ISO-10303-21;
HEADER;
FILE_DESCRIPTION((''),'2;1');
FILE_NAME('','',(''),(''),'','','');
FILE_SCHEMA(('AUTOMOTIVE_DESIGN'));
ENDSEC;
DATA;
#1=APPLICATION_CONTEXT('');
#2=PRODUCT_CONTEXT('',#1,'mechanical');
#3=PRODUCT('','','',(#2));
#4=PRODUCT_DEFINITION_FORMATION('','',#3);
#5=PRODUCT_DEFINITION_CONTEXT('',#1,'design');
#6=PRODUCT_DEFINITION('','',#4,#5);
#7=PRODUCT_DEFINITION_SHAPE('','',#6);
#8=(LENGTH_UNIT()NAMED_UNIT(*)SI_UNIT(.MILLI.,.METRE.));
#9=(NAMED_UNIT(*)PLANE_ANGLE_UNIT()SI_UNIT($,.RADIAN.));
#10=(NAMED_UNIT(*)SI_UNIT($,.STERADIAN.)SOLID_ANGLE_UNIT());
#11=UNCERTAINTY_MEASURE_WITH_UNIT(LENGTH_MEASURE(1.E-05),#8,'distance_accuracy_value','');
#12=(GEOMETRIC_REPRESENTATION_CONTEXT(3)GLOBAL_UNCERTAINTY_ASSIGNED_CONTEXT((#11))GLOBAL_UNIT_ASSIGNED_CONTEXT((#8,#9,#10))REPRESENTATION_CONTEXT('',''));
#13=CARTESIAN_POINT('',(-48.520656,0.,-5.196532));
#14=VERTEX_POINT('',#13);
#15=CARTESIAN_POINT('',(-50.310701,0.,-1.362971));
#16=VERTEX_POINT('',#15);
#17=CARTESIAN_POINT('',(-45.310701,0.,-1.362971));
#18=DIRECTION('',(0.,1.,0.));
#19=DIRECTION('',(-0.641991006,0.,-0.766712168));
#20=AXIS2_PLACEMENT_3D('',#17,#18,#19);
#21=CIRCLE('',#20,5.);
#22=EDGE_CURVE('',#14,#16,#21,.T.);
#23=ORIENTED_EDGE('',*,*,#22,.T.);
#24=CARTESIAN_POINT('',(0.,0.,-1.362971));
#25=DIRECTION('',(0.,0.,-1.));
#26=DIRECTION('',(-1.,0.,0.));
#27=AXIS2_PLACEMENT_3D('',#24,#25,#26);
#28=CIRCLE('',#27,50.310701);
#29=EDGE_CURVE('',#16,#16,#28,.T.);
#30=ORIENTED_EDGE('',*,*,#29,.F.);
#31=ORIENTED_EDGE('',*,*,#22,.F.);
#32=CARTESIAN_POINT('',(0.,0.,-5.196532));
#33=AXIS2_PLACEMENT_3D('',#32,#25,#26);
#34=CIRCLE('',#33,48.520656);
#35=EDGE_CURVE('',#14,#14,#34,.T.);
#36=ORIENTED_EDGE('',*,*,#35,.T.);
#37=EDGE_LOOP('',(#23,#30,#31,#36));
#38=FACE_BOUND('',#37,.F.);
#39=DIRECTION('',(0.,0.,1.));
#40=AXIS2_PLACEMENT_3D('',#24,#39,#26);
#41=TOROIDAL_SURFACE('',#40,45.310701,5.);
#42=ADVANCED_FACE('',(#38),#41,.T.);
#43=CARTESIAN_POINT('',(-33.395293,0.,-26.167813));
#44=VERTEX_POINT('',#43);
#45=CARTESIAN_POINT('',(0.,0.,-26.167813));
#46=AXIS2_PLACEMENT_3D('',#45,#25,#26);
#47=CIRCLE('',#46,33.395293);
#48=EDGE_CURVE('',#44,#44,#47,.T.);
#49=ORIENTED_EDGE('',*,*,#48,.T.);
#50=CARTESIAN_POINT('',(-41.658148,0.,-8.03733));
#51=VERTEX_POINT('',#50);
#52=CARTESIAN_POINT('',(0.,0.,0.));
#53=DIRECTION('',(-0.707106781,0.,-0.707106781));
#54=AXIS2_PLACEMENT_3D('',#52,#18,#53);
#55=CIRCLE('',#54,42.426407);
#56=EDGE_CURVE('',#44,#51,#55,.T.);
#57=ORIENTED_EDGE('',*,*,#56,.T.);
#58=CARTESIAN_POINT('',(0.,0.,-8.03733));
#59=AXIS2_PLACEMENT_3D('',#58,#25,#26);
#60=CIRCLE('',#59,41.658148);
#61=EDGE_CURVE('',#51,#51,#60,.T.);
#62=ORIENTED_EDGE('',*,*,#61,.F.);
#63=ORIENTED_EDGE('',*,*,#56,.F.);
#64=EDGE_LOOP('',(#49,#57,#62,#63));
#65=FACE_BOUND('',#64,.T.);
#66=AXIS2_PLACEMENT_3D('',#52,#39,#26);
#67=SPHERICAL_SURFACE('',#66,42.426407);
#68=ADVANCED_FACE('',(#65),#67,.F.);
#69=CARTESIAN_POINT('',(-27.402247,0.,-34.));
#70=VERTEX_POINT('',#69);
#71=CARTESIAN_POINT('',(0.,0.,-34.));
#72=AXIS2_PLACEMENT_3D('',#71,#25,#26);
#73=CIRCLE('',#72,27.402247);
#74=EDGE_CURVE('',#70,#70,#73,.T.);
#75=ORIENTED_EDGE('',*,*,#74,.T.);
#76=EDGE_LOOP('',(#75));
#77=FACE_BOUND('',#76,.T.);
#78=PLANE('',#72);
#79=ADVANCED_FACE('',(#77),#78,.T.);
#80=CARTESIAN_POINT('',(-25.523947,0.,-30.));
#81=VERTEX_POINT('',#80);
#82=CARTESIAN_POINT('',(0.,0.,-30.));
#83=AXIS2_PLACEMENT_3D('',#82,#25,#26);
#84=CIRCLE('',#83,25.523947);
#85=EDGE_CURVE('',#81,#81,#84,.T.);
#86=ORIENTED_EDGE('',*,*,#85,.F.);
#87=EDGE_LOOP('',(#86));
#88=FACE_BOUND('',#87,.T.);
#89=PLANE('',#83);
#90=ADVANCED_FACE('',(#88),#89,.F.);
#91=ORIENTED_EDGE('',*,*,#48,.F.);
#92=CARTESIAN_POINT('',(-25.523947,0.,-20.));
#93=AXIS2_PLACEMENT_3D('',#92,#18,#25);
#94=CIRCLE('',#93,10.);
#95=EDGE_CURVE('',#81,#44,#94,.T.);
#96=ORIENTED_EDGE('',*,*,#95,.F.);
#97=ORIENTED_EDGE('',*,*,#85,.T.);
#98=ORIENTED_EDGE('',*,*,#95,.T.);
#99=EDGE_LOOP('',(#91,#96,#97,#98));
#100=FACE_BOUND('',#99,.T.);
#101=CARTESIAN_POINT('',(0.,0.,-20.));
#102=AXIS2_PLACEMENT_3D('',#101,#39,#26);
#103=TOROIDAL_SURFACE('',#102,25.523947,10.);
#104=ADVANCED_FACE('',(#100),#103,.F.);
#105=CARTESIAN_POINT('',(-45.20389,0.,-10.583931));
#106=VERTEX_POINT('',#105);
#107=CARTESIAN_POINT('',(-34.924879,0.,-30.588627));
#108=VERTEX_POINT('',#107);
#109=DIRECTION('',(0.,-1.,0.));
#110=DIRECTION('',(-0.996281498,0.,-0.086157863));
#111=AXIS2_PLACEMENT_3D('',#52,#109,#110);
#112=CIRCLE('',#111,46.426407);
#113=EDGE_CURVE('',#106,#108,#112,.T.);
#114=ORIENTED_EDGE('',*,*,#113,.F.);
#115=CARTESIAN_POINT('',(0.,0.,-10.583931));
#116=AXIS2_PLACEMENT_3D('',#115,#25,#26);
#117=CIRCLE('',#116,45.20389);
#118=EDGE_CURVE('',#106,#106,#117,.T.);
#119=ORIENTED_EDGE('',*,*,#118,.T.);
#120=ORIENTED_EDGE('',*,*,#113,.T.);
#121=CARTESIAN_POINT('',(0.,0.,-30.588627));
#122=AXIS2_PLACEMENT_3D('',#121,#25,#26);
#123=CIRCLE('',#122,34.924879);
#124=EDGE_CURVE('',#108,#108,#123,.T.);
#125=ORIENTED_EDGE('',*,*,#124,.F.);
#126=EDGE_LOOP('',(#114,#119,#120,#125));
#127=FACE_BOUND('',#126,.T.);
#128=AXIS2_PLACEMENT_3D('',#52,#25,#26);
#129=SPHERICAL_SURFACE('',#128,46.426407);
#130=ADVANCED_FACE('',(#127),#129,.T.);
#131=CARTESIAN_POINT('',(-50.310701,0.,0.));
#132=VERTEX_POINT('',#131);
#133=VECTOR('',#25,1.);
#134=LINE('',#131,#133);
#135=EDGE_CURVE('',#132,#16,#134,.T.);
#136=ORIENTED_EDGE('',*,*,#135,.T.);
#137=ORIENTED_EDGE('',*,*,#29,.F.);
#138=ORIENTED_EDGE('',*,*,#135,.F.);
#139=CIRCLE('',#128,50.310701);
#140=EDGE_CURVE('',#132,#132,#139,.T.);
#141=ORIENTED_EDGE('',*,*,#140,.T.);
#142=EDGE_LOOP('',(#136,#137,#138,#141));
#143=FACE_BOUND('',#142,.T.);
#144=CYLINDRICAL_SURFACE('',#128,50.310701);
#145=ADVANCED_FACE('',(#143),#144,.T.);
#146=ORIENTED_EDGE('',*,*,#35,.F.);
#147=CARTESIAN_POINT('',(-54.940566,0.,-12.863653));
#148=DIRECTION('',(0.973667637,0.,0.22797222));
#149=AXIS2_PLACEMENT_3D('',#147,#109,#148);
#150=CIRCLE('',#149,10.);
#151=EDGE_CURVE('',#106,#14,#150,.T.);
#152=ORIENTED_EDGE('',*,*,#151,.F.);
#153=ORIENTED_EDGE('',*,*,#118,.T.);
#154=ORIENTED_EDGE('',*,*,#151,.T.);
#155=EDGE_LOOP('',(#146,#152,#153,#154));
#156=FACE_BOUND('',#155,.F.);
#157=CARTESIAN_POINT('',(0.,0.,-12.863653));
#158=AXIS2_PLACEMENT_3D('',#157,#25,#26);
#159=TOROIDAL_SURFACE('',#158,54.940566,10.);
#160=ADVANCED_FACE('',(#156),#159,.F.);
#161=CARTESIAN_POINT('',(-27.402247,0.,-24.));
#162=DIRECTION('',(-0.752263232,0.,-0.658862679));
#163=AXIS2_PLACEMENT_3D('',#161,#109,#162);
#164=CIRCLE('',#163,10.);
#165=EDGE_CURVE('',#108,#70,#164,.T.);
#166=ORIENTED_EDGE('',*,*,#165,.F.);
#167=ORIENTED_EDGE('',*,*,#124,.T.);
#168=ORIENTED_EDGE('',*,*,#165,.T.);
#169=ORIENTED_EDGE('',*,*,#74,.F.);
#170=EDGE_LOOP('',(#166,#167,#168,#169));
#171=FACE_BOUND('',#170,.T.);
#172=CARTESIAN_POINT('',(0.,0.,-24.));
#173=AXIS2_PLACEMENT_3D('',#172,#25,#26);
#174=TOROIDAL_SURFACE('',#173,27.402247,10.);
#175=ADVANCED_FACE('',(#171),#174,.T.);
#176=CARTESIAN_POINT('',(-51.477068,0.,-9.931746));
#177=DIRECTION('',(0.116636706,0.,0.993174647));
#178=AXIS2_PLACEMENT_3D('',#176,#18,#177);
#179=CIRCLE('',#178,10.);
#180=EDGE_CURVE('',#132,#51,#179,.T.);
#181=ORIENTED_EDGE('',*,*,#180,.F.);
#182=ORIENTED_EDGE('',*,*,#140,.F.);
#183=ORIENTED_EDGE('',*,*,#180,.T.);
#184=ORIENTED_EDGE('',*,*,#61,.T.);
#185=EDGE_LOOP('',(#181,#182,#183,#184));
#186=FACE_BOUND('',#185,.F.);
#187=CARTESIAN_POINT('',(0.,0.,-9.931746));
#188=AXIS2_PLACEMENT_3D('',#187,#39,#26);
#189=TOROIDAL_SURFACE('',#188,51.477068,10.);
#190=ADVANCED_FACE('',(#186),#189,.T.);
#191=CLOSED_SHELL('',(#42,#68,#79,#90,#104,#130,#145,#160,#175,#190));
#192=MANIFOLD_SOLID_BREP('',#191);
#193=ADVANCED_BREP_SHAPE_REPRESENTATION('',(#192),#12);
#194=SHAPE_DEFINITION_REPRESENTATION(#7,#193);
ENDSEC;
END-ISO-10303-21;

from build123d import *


# Not quite as in the source:
# - a fillet or chamfer that OpenCascade refuses, or shapes differently, is made with other operations: its cross-section is extruded or revolved along the edge and cut away or added


with BuildPart() as f1:
    # F0 (on Front) → F1 (revolve)
    with BuildSketch(Plane.XZ):
        with BuildLine():
            Line((0, -34), (0, -30))
            Line((0, -30), (-30, -30))
            ThreePointArc((-30, -30), (-39.1968889463, -16.2358830044), (-42.4264068712, 0))
            Line((-42.4264068712, 0), (-50.3107011318, 0))
            Line((-50.3107011318, 0), (-50.3107011318, -4))
            Line((-50.3107011318, -4), (-46.2537701703, -4))
            ThreePointArc((-46.2537701703, -4), (-41.7232145336, -20.361351231), (-31.6134663549, -34))
            Line((-31.6134663549, -34), (0, -34))
        make_face()
    revolve(axis=Axis((0, 0, -15), (0, 0, -1)))

    # F2: fillet of radius 10 on 4 edges, made by hand

    # F2_s1 → F2_t2 (revolve)
    with BuildSketch(Plane.XZ):
        with BuildLine():
            ThreePointArc((-25.5239468456, -30), (-29.9012676169, -28.9910546025), (-33.395292859, -26.1678125731))
            ThreePointArc((-33.395292859, -26.1678125731), (-31.7555066766, -28.135170085), (-30, -30))
            Line((-30, -30), (-25.5239468456, -30))
        make_face()
    revolve(axis=Axis((0, 0, -30), (0, 0, -1)))

    # F2_s3 → F2_t4 (revolve)
    with BuildSketch(Plane.XZ):
        with BuildLine():
            ThreePointArc((-45.2038898575, -10.5839310619), (-47.0388945384, -6.73473945), (-50.3107011318, -4))
            Line((-50.3107011318, -4), (-46.2537701703, -4))
            ThreePointArc((-46.2537701703, -4), (-45.8471692855, -7.310836031), (-45.2038898575, -10.5839310619))
        make_face()
    revolve(axis=Axis((0, 0, -4), (0, 0, -1)))

    # F2_s5 → F2_t6 (revolve, cut)
    with BuildSketch(Plane.XZ):
        with BuildLine():
            ThreePointArc((-50.3107011318, 0), (-44.671276634, -2.6050008536), (-41.6581484398, -8.0373296912))
            ThreePointArc((-41.6581484398, -8.0373296912), (-42.2339055452, -4.0369818424), (-42.4264068712, 0))
            Line((-42.4264068712, 0), (-50.3107011318, 0))
        make_face()
    revolve(axis=Axis((0, 0, 0), (0, 0, -1)), mode=Mode.SUBTRACT)

    # F2_s7 → F2_t8 (revolve, cut)
    with BuildSketch(Plane.XZ):
        with BuildLine():
            ThreePointArc((-34.9248789027, -30.5886267852), (-31.5322424712, -33.1073121131), (-27.4022465784, -34))
            Line((-27.4022465784, -34), (-31.6134663549, -34))
            ThreePointArc((-31.6134663549, -34), (-33.3128685977, -32.3367289744), (-34.9248789027, -30.5886267852))
        make_face()
    revolve(axis=Axis((0, 0, -34), (0, 0, -1)), mode=Mode.SUBTRACT)

    # F3: fillet of radius 5 on 2 edges, made by hand

    # F3_s1 → F3_t2 (revolve, cut)
    with BuildSketch(Plane.XZ):
        with BuildLine():
            ThreePointArc((-48.5206561627, -5.1965315899), (-49.8411412404, -3.478416904), (-50.3107011318, -1.3629707518))
            Line((-50.3107011318, -1.3629707518), (-50.3107011318, -4))
            ThreePointArc((-50.3107011318, -4), (-49.3833812624, -4.5499479973), (-48.5206561627, -5.1965315899))
        make_face()
    revolve(axis=Axis((0, 0, -4), (0, 0, -1)), mode=Mode.SUBTRACT)


solid = f1.part
